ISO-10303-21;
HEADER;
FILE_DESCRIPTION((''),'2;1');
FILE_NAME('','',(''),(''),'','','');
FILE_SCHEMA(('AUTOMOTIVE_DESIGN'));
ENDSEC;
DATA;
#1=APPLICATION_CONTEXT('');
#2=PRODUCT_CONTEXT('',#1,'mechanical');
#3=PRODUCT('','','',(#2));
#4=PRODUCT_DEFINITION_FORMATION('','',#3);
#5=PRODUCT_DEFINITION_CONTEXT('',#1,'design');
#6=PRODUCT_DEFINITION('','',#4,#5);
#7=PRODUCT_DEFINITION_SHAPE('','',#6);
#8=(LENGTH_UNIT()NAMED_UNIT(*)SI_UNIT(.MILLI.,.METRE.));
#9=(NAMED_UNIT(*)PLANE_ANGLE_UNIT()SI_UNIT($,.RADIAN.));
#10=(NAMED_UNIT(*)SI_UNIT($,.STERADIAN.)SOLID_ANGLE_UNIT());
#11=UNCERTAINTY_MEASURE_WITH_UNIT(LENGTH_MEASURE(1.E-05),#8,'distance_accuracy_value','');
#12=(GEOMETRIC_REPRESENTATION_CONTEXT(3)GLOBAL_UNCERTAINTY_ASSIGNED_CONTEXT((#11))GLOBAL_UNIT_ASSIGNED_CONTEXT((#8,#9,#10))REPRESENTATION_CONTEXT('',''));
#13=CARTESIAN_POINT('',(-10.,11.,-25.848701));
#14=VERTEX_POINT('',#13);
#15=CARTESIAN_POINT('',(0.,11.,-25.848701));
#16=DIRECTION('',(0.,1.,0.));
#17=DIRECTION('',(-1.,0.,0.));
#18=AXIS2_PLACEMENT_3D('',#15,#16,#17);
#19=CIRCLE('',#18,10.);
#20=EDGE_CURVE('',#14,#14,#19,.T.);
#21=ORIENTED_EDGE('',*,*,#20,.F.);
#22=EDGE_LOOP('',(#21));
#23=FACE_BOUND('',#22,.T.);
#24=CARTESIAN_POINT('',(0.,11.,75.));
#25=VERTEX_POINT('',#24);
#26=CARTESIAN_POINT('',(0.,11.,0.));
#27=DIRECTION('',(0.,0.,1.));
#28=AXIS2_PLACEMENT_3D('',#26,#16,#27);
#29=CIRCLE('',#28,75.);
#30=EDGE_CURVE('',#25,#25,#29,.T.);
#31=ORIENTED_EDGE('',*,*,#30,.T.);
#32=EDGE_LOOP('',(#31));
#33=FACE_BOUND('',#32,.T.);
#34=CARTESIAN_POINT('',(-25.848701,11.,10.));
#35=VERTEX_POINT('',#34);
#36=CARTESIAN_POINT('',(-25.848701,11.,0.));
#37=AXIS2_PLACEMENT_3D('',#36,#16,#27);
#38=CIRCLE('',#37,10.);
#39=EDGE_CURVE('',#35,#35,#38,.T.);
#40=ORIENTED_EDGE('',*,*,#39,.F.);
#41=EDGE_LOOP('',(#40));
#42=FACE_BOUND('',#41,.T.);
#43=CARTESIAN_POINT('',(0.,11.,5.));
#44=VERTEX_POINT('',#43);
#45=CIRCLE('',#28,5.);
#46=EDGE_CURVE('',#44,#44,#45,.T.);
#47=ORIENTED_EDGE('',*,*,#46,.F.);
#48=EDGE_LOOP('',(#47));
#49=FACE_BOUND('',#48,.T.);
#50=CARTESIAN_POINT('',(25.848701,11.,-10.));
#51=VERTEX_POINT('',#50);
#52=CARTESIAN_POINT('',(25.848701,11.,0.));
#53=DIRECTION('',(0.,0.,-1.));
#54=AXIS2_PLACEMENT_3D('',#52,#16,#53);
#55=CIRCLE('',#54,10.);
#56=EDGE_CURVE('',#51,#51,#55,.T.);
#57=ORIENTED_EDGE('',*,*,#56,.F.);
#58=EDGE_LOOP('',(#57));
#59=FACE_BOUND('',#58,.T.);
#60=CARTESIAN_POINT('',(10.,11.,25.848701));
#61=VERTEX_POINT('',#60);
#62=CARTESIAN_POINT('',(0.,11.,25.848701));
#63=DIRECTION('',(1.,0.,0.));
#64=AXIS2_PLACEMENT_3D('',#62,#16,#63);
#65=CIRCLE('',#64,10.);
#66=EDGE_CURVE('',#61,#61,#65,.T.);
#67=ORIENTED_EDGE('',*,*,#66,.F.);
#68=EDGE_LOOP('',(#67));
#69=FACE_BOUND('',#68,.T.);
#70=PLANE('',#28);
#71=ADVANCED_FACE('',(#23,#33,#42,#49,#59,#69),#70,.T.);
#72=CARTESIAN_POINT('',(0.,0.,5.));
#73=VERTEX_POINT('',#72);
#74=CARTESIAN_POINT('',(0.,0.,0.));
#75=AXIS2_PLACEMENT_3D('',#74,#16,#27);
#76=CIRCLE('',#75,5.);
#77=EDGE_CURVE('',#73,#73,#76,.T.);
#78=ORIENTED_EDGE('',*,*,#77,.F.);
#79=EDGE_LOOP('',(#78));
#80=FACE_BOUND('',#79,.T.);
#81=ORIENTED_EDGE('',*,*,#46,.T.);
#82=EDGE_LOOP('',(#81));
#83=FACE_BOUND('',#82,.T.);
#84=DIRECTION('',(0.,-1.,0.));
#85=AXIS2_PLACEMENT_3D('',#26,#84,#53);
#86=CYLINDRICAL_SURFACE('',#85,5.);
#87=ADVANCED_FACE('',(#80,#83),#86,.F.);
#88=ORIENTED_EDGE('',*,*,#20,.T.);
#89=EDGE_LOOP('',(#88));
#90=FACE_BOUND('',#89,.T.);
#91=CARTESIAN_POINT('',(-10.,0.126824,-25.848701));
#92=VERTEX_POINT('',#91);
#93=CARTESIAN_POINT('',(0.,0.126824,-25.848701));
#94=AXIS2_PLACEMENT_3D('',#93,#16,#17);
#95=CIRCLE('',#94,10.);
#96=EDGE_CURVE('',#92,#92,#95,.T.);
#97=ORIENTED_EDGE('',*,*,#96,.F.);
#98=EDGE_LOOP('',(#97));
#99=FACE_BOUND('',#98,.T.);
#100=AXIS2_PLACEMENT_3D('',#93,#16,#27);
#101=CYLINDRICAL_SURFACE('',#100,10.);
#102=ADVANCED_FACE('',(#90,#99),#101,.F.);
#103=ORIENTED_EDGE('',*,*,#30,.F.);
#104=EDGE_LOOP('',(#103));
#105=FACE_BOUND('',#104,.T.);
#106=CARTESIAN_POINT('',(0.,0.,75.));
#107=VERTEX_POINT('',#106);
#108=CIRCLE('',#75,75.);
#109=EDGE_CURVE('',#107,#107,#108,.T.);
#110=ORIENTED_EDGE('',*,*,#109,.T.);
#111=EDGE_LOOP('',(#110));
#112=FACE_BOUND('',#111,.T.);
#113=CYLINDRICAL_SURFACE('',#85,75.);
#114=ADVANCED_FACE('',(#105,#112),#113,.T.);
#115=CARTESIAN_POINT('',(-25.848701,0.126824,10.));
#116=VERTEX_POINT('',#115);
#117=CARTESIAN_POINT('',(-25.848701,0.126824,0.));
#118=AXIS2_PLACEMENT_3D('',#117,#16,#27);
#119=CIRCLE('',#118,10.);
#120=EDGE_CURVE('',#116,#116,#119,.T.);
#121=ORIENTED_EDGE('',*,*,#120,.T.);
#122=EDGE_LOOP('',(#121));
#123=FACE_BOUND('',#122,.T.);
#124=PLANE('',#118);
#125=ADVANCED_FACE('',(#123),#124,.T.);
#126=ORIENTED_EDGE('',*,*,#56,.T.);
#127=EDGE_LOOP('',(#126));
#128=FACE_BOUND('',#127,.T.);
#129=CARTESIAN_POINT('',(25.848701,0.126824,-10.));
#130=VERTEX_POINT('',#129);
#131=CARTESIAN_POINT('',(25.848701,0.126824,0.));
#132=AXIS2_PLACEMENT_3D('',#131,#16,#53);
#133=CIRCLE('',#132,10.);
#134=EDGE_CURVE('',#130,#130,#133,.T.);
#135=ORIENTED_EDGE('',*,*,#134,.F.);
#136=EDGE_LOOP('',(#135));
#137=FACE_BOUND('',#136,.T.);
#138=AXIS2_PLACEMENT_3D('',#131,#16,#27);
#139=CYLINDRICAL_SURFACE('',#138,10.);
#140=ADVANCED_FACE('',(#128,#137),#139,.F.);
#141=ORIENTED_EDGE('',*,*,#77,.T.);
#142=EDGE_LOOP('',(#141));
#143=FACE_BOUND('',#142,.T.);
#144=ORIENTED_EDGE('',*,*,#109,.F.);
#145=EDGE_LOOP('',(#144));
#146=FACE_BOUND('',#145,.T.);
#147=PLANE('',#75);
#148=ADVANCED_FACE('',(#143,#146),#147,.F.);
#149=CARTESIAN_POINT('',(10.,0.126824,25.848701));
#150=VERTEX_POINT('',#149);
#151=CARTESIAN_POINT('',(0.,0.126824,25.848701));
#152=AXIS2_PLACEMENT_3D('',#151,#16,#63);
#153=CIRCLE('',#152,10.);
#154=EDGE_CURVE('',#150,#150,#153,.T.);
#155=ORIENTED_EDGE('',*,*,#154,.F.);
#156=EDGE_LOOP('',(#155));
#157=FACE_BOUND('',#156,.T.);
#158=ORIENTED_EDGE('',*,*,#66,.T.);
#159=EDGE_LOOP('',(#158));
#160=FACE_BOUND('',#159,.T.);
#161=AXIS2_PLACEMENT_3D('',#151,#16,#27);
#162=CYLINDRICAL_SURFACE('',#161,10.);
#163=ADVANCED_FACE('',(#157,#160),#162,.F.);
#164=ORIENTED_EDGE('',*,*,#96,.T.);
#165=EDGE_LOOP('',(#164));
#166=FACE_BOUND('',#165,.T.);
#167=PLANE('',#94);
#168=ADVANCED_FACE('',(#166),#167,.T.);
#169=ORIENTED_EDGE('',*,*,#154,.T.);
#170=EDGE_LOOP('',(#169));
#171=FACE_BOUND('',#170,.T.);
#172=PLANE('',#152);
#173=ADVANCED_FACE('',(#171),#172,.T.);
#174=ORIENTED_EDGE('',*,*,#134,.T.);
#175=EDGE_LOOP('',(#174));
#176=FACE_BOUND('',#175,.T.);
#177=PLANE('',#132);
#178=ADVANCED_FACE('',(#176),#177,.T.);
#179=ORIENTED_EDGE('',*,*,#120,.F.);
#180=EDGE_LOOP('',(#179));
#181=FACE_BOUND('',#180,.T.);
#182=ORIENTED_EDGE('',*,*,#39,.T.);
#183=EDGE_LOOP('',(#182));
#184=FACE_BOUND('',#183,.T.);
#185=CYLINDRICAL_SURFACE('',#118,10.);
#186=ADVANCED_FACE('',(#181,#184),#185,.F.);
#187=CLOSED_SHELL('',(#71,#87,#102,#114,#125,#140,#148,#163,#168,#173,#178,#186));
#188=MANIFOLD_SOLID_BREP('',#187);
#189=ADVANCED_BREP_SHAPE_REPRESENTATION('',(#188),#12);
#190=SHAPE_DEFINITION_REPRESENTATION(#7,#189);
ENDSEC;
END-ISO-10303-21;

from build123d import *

# Parameters (mm, degrees)
SKETCH1_R           = 75
BOSS_EXTRUDE1_DEPTH = 11
SKETCH2_R           = 5
CUT_EXTRUDE1_DEPTH  = 107.6348911
SKETCH3_R           = 10
CUT_EXTRUDE2_DEPTH  = 10.873176466
CIRPATTERN1_COUNT   = 4


with BuildPart() as part:
    # Sketch1 → Boss-Extrude1 (new body)
    with BuildSketch(Plane(origin=(0, 0, 0), x_dir=(1, 0, 0), z_dir=(0, 1, 0))):
        Circle(SKETCH1_R)
    extrude(amount=BOSS_EXTRUDE1_DEPTH)

    # Sketch2 → Cut-Extrude1 (cut, through all)
    with BuildSketch(Plane(origin=(0, 0, 0), x_dir=(1, 0, 0), z_dir=(0, 1, 0))):
        Circle(SKETCH2_R)
    extrude(amount=CUT_EXTRUDE1_DEPTH, mode=Mode.SUBTRACT)

    # Sketch3 → Cut-Extrude2 (cut)
    with BuildSketch(Plane(origin=(0, 11, 0), x_dir=(1, 0, 0), z_dir=(0, 1, 0))):
        with Locations((-25.848701231, 0)):
            Circle(SKETCH3_R)
    cut_extrude2 = extrude(amount=-CUT_EXTRUDE2_DEPTH, mode=Mode.SUBTRACT)

    # CirPattern1: Cut-Extrude2 ×4 about axis
    cirpattern1_axis = Axis((0, 0, 0), (0, 1, 0))
    for i in range(1, CIRPATTERN1_COUNT):
        add(cut_extrude2.rotate(cirpattern1_axis, i * 360 / CIRPATTERN1_COUNT), mode=Mode.SUBTRACT)


solid = part.part
